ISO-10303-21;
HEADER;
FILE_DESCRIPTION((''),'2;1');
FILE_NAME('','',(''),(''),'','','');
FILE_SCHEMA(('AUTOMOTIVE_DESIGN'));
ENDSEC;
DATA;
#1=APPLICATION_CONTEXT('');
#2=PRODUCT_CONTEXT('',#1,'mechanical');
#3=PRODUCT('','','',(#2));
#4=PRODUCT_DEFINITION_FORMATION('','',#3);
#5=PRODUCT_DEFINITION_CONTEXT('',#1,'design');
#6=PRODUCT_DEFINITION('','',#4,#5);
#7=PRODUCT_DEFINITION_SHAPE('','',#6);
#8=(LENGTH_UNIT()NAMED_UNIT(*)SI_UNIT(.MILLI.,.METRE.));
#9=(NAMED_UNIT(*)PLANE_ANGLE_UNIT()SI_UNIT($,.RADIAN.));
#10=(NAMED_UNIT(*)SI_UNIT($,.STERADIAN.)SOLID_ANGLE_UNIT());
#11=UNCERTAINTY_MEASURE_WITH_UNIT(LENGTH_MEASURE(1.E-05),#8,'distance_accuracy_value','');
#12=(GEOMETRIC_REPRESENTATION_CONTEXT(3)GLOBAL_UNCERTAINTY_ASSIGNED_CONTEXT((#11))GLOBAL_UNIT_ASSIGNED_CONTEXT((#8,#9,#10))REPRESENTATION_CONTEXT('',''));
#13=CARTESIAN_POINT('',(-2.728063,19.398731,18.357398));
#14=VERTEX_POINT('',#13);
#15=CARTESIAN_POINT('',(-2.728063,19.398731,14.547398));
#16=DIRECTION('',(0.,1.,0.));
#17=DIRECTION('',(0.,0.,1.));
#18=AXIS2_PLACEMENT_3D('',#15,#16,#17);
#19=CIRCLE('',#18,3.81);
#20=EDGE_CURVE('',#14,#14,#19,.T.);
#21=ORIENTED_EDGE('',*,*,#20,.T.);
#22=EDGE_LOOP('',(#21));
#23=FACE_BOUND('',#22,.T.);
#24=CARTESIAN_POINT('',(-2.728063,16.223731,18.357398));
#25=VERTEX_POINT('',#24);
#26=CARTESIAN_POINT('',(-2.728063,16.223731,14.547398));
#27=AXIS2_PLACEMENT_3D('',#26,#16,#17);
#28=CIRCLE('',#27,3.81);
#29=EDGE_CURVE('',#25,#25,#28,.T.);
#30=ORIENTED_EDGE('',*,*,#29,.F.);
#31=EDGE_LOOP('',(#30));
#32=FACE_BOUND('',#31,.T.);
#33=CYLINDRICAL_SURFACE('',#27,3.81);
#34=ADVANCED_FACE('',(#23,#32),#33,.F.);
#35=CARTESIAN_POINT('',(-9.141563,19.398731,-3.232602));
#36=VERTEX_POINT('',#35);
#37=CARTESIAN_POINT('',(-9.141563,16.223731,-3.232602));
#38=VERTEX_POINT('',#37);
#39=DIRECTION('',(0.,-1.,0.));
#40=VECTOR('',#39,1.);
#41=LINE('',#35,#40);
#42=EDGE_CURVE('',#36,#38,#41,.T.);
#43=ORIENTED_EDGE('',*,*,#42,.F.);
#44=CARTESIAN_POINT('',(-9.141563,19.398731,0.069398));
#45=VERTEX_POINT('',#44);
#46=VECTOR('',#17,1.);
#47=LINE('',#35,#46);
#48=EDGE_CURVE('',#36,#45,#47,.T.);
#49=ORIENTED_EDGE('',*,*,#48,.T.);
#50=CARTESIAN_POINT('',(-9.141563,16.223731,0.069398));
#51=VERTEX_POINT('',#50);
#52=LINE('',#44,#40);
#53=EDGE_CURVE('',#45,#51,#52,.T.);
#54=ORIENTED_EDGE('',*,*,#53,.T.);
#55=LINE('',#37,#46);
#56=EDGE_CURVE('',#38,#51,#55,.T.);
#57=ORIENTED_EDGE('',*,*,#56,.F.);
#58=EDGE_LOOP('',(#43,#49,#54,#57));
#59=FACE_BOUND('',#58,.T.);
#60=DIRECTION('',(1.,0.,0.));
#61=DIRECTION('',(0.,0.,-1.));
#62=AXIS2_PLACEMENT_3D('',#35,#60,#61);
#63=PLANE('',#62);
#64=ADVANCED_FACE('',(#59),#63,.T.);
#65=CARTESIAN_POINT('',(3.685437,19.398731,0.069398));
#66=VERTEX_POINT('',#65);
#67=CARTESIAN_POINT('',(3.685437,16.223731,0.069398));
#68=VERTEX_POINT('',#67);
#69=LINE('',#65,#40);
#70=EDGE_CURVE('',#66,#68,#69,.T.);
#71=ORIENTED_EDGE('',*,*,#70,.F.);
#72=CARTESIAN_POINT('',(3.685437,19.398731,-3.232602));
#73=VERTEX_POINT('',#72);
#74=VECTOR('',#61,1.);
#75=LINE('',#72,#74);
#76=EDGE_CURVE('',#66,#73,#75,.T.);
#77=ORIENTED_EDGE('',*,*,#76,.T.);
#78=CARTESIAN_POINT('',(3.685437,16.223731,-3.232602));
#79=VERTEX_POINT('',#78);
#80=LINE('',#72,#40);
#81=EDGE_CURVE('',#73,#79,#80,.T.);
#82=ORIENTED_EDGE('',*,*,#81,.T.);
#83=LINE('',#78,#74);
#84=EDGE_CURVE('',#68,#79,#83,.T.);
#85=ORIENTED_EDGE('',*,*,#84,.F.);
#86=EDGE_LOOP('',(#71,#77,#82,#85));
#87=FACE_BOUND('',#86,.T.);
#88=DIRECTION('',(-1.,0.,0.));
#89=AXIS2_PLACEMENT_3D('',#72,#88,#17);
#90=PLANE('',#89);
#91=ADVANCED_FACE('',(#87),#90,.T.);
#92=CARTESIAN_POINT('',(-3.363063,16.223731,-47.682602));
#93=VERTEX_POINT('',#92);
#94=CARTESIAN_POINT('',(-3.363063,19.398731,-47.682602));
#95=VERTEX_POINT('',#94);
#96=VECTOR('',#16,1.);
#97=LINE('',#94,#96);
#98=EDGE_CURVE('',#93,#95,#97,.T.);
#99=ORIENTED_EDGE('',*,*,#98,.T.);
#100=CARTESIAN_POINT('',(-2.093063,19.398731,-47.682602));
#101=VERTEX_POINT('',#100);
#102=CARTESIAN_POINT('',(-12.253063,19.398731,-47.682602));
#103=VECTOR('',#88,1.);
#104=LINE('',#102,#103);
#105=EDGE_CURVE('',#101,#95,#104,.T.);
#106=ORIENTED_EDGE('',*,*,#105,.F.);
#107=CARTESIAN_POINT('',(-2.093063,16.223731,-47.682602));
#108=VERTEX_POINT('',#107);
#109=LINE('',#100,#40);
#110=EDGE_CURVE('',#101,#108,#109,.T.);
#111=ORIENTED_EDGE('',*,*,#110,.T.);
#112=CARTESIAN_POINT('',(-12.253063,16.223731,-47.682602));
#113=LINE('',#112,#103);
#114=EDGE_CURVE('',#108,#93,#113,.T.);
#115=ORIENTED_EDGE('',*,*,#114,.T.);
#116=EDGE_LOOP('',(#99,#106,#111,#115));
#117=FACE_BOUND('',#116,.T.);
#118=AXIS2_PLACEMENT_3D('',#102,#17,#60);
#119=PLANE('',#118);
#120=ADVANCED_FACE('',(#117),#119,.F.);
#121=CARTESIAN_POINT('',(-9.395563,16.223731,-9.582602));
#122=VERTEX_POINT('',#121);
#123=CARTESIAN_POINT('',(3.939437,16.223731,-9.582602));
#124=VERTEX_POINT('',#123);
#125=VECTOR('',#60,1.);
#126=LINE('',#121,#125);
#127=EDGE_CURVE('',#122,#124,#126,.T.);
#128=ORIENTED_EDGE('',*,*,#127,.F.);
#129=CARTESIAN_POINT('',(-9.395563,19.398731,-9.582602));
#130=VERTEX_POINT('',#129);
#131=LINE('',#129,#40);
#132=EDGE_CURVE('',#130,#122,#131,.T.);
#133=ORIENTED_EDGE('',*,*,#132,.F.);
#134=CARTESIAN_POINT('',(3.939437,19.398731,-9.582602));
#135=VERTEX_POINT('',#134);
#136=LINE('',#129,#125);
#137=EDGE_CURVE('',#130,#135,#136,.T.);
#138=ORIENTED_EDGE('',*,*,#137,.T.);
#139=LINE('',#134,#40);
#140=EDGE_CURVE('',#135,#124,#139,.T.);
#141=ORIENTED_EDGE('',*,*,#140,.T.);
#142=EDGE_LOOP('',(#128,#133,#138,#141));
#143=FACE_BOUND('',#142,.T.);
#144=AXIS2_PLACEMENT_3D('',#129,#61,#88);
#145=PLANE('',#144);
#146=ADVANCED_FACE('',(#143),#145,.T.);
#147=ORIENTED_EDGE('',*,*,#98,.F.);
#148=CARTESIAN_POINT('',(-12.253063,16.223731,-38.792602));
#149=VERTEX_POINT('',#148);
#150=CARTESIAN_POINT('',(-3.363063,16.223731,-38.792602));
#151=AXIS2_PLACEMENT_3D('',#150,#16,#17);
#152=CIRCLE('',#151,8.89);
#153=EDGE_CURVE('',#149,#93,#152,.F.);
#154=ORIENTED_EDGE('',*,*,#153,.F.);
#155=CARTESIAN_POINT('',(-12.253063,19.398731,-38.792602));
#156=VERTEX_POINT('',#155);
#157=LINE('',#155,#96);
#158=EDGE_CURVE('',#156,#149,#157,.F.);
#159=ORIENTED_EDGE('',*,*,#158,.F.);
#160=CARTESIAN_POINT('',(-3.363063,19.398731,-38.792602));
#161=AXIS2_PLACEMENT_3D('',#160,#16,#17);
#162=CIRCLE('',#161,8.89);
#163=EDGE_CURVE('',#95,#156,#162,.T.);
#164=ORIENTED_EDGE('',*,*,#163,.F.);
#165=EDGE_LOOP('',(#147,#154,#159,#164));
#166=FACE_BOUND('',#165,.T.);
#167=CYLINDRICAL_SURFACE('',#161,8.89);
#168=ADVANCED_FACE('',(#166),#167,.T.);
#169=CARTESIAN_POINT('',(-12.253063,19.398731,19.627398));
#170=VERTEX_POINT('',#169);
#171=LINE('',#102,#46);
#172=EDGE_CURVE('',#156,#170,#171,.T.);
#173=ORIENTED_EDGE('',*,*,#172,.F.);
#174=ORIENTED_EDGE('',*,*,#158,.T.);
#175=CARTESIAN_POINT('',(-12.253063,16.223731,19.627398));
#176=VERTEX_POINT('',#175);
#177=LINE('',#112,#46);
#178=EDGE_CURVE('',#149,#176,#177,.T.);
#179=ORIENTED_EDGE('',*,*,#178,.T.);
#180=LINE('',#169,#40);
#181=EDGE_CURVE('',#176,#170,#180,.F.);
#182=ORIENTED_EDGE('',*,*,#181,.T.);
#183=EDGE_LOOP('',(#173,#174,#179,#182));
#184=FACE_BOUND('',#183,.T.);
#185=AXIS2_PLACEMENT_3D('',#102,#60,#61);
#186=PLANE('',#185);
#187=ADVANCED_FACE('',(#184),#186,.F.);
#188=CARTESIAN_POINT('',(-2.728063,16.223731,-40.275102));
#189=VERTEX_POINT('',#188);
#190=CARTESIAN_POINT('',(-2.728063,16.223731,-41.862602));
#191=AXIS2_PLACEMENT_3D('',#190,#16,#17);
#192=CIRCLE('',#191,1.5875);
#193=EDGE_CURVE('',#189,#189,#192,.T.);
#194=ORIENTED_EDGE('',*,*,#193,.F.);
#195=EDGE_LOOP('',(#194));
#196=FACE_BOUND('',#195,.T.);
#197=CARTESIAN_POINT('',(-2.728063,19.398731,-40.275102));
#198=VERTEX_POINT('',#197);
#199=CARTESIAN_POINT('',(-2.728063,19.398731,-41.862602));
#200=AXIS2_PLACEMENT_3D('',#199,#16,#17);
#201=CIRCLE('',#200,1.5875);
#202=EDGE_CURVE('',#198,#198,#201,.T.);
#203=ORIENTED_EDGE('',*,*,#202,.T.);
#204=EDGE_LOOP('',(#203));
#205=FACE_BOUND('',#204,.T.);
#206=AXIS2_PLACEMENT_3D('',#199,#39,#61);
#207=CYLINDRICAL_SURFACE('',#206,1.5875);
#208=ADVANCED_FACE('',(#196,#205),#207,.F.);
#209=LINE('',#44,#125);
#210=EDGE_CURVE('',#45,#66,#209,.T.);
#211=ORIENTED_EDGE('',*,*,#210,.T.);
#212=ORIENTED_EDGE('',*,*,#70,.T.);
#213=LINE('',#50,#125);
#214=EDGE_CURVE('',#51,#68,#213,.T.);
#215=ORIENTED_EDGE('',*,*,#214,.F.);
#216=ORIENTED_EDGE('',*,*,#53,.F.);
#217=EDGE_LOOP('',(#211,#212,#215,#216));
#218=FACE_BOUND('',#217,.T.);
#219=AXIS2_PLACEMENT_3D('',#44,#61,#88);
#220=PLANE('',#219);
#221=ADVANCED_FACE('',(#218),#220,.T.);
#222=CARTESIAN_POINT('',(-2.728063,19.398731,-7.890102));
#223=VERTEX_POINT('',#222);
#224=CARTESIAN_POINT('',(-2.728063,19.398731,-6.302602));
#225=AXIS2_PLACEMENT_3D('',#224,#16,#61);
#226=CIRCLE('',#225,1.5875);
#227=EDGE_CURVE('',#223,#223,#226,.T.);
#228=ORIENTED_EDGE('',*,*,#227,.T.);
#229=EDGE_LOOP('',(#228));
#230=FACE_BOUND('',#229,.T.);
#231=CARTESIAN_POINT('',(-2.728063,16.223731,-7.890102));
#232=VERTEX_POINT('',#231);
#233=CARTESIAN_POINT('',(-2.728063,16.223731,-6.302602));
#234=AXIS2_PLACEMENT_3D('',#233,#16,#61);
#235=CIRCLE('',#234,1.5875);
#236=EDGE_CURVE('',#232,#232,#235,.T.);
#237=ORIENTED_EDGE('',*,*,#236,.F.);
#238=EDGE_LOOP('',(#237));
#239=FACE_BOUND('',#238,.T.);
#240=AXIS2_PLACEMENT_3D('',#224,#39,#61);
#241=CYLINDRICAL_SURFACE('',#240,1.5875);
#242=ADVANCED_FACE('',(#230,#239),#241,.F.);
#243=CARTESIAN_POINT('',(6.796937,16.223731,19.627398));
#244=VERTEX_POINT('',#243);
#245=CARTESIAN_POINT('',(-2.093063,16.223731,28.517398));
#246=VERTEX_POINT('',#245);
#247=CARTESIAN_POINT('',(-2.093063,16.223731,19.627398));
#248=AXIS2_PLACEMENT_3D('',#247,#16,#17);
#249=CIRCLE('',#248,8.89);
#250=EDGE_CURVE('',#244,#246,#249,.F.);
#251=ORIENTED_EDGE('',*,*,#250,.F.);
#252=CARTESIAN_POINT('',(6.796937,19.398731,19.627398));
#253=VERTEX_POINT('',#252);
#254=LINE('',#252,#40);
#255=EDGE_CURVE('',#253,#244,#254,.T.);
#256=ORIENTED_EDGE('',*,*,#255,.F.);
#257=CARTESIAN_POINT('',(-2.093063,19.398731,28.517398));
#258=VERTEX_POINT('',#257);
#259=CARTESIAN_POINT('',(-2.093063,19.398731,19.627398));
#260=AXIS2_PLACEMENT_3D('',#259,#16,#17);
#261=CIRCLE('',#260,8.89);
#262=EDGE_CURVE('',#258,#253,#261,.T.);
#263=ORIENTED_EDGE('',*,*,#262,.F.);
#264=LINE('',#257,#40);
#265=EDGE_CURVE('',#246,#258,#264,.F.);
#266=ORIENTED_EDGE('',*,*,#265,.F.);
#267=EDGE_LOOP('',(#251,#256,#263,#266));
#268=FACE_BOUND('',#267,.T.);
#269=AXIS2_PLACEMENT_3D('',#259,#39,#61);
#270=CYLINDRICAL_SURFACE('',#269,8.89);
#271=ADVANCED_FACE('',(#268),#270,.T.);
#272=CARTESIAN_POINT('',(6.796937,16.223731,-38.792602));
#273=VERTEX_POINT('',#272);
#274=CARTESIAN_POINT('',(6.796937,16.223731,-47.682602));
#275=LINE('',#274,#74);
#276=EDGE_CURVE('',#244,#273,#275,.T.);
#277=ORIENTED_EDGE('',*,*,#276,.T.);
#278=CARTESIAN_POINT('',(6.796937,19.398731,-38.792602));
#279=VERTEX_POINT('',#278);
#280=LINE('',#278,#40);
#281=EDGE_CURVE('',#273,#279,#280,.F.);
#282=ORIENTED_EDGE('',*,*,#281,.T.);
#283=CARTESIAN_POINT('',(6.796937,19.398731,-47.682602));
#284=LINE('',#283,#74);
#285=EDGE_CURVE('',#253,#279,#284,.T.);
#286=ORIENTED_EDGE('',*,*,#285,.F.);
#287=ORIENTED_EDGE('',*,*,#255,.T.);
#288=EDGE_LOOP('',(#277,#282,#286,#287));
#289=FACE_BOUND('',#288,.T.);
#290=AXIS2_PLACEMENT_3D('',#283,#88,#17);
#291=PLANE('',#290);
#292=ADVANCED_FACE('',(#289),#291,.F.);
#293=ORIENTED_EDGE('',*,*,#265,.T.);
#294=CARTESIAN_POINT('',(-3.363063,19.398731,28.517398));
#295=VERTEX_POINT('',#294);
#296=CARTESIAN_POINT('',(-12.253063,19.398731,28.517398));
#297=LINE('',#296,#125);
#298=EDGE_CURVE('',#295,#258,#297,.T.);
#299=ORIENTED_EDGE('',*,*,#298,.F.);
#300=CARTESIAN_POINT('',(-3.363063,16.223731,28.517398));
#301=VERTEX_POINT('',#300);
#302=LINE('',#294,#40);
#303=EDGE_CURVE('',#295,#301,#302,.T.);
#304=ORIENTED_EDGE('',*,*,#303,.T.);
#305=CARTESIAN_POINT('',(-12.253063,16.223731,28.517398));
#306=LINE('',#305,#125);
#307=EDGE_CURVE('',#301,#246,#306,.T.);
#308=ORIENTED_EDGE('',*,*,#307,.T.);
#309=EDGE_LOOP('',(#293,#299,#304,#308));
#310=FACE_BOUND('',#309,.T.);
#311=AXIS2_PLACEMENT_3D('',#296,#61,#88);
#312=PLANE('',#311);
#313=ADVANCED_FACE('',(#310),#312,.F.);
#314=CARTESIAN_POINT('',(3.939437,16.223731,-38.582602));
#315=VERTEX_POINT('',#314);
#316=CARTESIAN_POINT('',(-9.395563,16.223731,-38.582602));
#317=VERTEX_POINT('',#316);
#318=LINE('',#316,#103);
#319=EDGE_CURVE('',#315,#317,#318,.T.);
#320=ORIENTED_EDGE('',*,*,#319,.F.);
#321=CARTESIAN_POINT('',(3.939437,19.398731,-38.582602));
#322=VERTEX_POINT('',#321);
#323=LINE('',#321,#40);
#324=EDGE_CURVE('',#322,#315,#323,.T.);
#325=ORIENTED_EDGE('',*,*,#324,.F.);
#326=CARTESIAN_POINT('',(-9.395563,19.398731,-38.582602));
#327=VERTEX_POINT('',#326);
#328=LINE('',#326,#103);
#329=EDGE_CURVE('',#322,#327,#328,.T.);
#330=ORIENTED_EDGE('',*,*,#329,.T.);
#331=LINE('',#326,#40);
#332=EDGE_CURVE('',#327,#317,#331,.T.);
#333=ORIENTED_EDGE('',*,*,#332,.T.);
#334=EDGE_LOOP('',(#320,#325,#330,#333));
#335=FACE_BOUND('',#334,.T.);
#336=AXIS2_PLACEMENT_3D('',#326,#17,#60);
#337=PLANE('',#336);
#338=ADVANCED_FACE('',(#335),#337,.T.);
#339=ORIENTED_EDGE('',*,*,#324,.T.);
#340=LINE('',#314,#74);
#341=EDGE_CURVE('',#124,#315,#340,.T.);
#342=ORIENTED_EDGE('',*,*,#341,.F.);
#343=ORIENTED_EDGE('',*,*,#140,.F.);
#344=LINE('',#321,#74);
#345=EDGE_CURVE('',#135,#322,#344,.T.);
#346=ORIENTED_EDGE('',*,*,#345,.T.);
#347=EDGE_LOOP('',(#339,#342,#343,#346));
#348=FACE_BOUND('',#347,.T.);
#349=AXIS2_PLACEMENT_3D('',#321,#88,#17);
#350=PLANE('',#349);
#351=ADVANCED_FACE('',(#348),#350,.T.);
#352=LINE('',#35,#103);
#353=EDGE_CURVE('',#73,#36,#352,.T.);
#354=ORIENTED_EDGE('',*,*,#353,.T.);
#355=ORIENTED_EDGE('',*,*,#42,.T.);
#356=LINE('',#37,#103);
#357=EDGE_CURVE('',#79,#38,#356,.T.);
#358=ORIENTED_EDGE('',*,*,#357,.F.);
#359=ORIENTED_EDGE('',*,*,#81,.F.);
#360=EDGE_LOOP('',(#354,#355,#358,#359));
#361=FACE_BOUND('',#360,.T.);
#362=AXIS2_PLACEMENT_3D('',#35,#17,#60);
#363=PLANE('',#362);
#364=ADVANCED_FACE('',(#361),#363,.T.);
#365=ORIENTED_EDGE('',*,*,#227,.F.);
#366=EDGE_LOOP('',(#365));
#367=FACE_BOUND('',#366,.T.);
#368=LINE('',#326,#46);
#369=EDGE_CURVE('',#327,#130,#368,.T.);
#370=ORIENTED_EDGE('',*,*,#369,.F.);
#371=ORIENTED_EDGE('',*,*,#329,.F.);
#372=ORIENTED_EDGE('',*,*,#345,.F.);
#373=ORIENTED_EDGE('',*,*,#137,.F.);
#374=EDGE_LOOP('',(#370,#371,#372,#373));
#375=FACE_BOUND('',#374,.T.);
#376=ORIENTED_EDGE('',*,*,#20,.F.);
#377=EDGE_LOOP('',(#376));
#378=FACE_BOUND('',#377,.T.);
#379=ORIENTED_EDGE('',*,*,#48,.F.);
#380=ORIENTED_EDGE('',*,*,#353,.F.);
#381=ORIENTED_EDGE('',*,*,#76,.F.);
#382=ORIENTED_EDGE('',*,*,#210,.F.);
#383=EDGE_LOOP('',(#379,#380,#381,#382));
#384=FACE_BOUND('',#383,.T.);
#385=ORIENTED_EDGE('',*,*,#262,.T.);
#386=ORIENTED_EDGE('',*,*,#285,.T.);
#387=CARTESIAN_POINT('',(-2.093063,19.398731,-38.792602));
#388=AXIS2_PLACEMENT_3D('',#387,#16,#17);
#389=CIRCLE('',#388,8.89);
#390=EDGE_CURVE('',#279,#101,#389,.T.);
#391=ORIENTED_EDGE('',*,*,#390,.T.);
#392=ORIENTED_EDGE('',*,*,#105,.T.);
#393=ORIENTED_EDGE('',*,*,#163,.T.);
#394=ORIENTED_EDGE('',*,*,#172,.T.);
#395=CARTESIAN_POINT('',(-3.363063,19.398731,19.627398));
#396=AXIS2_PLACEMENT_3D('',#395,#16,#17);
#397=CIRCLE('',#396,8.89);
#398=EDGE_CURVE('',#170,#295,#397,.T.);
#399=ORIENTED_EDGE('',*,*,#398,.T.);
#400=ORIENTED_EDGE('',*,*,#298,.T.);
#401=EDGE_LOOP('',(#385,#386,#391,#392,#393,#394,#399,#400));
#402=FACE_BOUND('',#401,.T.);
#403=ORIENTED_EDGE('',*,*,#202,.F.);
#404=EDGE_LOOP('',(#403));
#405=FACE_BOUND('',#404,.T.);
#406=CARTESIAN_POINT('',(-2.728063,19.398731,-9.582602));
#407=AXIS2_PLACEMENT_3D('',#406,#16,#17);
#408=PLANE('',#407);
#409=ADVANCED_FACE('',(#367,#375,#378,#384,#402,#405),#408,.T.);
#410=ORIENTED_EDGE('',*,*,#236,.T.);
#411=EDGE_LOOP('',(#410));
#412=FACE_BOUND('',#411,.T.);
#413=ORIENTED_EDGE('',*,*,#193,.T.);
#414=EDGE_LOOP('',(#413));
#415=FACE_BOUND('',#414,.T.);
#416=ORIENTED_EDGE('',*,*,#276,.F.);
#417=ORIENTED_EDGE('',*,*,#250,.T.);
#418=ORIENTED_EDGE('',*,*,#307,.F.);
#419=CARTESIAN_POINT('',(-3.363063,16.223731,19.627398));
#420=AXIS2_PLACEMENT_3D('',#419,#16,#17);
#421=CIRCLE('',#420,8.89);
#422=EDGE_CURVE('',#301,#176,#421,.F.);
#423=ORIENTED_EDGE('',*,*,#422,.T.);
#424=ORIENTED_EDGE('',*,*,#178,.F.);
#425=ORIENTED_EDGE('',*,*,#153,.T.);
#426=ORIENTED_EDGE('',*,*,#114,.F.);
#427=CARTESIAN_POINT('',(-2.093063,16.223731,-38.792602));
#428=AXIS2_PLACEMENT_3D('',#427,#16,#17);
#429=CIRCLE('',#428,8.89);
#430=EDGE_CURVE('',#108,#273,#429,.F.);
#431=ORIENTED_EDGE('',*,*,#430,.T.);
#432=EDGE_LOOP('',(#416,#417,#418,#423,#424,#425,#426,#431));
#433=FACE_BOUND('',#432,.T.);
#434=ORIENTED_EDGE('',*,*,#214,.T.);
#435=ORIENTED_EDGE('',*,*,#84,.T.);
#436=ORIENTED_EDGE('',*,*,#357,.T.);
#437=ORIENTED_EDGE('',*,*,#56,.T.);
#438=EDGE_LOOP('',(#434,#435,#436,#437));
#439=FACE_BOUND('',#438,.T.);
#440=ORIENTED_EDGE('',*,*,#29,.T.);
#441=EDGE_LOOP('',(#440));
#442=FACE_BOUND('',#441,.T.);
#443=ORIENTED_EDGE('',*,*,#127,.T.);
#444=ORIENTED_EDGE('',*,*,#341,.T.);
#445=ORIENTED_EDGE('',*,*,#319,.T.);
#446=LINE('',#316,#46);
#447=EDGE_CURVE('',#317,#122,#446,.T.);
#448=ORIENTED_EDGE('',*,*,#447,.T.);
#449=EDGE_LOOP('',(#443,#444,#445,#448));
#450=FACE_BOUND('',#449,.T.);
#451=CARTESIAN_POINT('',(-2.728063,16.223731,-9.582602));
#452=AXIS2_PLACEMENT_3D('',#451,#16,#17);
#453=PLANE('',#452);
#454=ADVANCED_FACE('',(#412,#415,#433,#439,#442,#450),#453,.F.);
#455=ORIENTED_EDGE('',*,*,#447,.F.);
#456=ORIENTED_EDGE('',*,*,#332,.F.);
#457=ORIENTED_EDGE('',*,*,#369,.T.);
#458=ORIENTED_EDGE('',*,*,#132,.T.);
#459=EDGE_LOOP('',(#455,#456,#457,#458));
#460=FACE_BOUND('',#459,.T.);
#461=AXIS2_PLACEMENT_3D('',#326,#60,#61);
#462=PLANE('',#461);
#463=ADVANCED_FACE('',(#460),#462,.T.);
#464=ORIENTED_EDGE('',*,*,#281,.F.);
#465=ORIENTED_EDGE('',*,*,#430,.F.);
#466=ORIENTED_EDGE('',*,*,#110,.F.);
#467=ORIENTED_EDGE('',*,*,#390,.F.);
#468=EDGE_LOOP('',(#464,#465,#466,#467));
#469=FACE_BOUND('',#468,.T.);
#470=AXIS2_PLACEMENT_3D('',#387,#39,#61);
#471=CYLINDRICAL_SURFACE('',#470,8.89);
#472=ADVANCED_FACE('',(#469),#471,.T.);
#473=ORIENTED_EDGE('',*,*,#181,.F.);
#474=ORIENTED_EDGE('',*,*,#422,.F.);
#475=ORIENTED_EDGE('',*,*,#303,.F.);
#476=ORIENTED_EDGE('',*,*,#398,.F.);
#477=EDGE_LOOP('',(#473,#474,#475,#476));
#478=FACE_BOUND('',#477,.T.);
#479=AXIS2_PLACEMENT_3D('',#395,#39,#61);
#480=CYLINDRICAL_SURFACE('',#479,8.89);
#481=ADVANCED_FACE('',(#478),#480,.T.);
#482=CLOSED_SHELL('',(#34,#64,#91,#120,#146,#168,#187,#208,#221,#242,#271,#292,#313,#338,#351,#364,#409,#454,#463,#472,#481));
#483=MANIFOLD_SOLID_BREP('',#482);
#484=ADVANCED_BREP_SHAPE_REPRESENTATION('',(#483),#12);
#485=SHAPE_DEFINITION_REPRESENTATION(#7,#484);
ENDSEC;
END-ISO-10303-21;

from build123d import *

# Parameters (mm, degrees)
STEM_START                  = 16.223730914
STEM_SERVO_SIDE_OUTLINE_W   = 12.827
STEM_SERVO_SIDE_OUTLINE_H   = 3.302
STEM_SERVO_SIDE_OUTLINE_R   = 1.5875
STEM_SERVO_SIDE_OUTLINE_W_2 = 13.335
STEM_SERVO_SIDE_OUTLINE_H_2 = 29
STEM_SERVO_SIDE_DEPTH       = 3.175
SKETCH1_R                   = 3.81
CUT_EXTRUDE1_DEPTH          = 3.175
FILLET1_R                   = 8.89
FILLET2_R                   = 8.89


# Read off the part's stored shape, not the designer's step: Stem Servo Side
with BuildPart() as part:
    # Stem Servo Side outline → Stem Servo Side (new body)
    with BuildSketch(Plane(origin=(0, 0, 0), x_dir=(1, 0, 0), z_dir=(0, 1, 0)).offset(STEM_START)):
        with BuildLine():
            Line((-2.093063075, 47.682601639), (-3.363063075, 47.682601639))
            ThreePointArc((-3.363063075, 47.682601639), (-9.64924236, 45.078780923), (-12.253063075, 38.792601639))
            Line((-12.253063075, 38.792601639), (-12.253063075, -28.517398361))
            Line((-12.253063075, -28.517398361), (6.796936925, -28.517398361))
            Line((6.796936925, -28.517398361), (6.796936925, 38.792601639))
            ThreePointArc((6.796936925, 38.792601639), (4.19311621, 45.078780924), (-2.093063075, 47.682601639))
        make_face()
        with Locations((-2.728063075, 1.581601639)):
            Rectangle(STEM_SERVO_SIDE_OUTLINE_W, STEM_SERVO_SIDE_OUTLINE_H, mode=Mode.SUBTRACT)
        with Locations((-2.728063075, 6.302601639)):
            Circle(STEM_SERVO_SIDE_OUTLINE_R, mode=Mode.SUBTRACT)
        with Locations((-2.728063075, 24.082601639)):
            Rectangle(STEM_SERVO_SIDE_OUTLINE_W_2, STEM_SERVO_SIDE_OUTLINE_H_2, mode=Mode.SUBTRACT)
        with Locations((-2.728063075, 41.862601639)):
            Circle(STEM_SERVO_SIDE_OUTLINE_R, mode=Mode.SUBTRACT)
    extrude(amount=STEM_SERVO_SIDE_DEPTH)

    # Sketch1 → Cut-Extrude1 (cut)
    with BuildSketch(Plane(origin=(0, 19.398730914, 0), x_dir=(1, 0, 0), z_dir=(0, 1, 0))):
        with Locations(Location((-2.728063075, -14.547398361, 0), (0, 0, 270))):
            Circle(SKETCH1_R)
    extrude(amount=-CUT_EXTRUDE1_DEPTH, mode=Mode.SUBTRACT)

    # Fillet1
    fillet1_edges = [part.edges().sort_by_distance(p)[0] for p in [
        (6.796936925, 17.811230914, 28.517398361),
    ]]
    fillet(fillet1_edges, radius=FILLET1_R)

    # Fillet2
    fillet2_edges = [part.edges().sort_by_distance(p)[0] for p in [
        (-12.253063075, 17.811230914, 28.517398361),
    ]]
    fillet(fillet2_edges, radius=FILLET2_R)


solid = part.part
